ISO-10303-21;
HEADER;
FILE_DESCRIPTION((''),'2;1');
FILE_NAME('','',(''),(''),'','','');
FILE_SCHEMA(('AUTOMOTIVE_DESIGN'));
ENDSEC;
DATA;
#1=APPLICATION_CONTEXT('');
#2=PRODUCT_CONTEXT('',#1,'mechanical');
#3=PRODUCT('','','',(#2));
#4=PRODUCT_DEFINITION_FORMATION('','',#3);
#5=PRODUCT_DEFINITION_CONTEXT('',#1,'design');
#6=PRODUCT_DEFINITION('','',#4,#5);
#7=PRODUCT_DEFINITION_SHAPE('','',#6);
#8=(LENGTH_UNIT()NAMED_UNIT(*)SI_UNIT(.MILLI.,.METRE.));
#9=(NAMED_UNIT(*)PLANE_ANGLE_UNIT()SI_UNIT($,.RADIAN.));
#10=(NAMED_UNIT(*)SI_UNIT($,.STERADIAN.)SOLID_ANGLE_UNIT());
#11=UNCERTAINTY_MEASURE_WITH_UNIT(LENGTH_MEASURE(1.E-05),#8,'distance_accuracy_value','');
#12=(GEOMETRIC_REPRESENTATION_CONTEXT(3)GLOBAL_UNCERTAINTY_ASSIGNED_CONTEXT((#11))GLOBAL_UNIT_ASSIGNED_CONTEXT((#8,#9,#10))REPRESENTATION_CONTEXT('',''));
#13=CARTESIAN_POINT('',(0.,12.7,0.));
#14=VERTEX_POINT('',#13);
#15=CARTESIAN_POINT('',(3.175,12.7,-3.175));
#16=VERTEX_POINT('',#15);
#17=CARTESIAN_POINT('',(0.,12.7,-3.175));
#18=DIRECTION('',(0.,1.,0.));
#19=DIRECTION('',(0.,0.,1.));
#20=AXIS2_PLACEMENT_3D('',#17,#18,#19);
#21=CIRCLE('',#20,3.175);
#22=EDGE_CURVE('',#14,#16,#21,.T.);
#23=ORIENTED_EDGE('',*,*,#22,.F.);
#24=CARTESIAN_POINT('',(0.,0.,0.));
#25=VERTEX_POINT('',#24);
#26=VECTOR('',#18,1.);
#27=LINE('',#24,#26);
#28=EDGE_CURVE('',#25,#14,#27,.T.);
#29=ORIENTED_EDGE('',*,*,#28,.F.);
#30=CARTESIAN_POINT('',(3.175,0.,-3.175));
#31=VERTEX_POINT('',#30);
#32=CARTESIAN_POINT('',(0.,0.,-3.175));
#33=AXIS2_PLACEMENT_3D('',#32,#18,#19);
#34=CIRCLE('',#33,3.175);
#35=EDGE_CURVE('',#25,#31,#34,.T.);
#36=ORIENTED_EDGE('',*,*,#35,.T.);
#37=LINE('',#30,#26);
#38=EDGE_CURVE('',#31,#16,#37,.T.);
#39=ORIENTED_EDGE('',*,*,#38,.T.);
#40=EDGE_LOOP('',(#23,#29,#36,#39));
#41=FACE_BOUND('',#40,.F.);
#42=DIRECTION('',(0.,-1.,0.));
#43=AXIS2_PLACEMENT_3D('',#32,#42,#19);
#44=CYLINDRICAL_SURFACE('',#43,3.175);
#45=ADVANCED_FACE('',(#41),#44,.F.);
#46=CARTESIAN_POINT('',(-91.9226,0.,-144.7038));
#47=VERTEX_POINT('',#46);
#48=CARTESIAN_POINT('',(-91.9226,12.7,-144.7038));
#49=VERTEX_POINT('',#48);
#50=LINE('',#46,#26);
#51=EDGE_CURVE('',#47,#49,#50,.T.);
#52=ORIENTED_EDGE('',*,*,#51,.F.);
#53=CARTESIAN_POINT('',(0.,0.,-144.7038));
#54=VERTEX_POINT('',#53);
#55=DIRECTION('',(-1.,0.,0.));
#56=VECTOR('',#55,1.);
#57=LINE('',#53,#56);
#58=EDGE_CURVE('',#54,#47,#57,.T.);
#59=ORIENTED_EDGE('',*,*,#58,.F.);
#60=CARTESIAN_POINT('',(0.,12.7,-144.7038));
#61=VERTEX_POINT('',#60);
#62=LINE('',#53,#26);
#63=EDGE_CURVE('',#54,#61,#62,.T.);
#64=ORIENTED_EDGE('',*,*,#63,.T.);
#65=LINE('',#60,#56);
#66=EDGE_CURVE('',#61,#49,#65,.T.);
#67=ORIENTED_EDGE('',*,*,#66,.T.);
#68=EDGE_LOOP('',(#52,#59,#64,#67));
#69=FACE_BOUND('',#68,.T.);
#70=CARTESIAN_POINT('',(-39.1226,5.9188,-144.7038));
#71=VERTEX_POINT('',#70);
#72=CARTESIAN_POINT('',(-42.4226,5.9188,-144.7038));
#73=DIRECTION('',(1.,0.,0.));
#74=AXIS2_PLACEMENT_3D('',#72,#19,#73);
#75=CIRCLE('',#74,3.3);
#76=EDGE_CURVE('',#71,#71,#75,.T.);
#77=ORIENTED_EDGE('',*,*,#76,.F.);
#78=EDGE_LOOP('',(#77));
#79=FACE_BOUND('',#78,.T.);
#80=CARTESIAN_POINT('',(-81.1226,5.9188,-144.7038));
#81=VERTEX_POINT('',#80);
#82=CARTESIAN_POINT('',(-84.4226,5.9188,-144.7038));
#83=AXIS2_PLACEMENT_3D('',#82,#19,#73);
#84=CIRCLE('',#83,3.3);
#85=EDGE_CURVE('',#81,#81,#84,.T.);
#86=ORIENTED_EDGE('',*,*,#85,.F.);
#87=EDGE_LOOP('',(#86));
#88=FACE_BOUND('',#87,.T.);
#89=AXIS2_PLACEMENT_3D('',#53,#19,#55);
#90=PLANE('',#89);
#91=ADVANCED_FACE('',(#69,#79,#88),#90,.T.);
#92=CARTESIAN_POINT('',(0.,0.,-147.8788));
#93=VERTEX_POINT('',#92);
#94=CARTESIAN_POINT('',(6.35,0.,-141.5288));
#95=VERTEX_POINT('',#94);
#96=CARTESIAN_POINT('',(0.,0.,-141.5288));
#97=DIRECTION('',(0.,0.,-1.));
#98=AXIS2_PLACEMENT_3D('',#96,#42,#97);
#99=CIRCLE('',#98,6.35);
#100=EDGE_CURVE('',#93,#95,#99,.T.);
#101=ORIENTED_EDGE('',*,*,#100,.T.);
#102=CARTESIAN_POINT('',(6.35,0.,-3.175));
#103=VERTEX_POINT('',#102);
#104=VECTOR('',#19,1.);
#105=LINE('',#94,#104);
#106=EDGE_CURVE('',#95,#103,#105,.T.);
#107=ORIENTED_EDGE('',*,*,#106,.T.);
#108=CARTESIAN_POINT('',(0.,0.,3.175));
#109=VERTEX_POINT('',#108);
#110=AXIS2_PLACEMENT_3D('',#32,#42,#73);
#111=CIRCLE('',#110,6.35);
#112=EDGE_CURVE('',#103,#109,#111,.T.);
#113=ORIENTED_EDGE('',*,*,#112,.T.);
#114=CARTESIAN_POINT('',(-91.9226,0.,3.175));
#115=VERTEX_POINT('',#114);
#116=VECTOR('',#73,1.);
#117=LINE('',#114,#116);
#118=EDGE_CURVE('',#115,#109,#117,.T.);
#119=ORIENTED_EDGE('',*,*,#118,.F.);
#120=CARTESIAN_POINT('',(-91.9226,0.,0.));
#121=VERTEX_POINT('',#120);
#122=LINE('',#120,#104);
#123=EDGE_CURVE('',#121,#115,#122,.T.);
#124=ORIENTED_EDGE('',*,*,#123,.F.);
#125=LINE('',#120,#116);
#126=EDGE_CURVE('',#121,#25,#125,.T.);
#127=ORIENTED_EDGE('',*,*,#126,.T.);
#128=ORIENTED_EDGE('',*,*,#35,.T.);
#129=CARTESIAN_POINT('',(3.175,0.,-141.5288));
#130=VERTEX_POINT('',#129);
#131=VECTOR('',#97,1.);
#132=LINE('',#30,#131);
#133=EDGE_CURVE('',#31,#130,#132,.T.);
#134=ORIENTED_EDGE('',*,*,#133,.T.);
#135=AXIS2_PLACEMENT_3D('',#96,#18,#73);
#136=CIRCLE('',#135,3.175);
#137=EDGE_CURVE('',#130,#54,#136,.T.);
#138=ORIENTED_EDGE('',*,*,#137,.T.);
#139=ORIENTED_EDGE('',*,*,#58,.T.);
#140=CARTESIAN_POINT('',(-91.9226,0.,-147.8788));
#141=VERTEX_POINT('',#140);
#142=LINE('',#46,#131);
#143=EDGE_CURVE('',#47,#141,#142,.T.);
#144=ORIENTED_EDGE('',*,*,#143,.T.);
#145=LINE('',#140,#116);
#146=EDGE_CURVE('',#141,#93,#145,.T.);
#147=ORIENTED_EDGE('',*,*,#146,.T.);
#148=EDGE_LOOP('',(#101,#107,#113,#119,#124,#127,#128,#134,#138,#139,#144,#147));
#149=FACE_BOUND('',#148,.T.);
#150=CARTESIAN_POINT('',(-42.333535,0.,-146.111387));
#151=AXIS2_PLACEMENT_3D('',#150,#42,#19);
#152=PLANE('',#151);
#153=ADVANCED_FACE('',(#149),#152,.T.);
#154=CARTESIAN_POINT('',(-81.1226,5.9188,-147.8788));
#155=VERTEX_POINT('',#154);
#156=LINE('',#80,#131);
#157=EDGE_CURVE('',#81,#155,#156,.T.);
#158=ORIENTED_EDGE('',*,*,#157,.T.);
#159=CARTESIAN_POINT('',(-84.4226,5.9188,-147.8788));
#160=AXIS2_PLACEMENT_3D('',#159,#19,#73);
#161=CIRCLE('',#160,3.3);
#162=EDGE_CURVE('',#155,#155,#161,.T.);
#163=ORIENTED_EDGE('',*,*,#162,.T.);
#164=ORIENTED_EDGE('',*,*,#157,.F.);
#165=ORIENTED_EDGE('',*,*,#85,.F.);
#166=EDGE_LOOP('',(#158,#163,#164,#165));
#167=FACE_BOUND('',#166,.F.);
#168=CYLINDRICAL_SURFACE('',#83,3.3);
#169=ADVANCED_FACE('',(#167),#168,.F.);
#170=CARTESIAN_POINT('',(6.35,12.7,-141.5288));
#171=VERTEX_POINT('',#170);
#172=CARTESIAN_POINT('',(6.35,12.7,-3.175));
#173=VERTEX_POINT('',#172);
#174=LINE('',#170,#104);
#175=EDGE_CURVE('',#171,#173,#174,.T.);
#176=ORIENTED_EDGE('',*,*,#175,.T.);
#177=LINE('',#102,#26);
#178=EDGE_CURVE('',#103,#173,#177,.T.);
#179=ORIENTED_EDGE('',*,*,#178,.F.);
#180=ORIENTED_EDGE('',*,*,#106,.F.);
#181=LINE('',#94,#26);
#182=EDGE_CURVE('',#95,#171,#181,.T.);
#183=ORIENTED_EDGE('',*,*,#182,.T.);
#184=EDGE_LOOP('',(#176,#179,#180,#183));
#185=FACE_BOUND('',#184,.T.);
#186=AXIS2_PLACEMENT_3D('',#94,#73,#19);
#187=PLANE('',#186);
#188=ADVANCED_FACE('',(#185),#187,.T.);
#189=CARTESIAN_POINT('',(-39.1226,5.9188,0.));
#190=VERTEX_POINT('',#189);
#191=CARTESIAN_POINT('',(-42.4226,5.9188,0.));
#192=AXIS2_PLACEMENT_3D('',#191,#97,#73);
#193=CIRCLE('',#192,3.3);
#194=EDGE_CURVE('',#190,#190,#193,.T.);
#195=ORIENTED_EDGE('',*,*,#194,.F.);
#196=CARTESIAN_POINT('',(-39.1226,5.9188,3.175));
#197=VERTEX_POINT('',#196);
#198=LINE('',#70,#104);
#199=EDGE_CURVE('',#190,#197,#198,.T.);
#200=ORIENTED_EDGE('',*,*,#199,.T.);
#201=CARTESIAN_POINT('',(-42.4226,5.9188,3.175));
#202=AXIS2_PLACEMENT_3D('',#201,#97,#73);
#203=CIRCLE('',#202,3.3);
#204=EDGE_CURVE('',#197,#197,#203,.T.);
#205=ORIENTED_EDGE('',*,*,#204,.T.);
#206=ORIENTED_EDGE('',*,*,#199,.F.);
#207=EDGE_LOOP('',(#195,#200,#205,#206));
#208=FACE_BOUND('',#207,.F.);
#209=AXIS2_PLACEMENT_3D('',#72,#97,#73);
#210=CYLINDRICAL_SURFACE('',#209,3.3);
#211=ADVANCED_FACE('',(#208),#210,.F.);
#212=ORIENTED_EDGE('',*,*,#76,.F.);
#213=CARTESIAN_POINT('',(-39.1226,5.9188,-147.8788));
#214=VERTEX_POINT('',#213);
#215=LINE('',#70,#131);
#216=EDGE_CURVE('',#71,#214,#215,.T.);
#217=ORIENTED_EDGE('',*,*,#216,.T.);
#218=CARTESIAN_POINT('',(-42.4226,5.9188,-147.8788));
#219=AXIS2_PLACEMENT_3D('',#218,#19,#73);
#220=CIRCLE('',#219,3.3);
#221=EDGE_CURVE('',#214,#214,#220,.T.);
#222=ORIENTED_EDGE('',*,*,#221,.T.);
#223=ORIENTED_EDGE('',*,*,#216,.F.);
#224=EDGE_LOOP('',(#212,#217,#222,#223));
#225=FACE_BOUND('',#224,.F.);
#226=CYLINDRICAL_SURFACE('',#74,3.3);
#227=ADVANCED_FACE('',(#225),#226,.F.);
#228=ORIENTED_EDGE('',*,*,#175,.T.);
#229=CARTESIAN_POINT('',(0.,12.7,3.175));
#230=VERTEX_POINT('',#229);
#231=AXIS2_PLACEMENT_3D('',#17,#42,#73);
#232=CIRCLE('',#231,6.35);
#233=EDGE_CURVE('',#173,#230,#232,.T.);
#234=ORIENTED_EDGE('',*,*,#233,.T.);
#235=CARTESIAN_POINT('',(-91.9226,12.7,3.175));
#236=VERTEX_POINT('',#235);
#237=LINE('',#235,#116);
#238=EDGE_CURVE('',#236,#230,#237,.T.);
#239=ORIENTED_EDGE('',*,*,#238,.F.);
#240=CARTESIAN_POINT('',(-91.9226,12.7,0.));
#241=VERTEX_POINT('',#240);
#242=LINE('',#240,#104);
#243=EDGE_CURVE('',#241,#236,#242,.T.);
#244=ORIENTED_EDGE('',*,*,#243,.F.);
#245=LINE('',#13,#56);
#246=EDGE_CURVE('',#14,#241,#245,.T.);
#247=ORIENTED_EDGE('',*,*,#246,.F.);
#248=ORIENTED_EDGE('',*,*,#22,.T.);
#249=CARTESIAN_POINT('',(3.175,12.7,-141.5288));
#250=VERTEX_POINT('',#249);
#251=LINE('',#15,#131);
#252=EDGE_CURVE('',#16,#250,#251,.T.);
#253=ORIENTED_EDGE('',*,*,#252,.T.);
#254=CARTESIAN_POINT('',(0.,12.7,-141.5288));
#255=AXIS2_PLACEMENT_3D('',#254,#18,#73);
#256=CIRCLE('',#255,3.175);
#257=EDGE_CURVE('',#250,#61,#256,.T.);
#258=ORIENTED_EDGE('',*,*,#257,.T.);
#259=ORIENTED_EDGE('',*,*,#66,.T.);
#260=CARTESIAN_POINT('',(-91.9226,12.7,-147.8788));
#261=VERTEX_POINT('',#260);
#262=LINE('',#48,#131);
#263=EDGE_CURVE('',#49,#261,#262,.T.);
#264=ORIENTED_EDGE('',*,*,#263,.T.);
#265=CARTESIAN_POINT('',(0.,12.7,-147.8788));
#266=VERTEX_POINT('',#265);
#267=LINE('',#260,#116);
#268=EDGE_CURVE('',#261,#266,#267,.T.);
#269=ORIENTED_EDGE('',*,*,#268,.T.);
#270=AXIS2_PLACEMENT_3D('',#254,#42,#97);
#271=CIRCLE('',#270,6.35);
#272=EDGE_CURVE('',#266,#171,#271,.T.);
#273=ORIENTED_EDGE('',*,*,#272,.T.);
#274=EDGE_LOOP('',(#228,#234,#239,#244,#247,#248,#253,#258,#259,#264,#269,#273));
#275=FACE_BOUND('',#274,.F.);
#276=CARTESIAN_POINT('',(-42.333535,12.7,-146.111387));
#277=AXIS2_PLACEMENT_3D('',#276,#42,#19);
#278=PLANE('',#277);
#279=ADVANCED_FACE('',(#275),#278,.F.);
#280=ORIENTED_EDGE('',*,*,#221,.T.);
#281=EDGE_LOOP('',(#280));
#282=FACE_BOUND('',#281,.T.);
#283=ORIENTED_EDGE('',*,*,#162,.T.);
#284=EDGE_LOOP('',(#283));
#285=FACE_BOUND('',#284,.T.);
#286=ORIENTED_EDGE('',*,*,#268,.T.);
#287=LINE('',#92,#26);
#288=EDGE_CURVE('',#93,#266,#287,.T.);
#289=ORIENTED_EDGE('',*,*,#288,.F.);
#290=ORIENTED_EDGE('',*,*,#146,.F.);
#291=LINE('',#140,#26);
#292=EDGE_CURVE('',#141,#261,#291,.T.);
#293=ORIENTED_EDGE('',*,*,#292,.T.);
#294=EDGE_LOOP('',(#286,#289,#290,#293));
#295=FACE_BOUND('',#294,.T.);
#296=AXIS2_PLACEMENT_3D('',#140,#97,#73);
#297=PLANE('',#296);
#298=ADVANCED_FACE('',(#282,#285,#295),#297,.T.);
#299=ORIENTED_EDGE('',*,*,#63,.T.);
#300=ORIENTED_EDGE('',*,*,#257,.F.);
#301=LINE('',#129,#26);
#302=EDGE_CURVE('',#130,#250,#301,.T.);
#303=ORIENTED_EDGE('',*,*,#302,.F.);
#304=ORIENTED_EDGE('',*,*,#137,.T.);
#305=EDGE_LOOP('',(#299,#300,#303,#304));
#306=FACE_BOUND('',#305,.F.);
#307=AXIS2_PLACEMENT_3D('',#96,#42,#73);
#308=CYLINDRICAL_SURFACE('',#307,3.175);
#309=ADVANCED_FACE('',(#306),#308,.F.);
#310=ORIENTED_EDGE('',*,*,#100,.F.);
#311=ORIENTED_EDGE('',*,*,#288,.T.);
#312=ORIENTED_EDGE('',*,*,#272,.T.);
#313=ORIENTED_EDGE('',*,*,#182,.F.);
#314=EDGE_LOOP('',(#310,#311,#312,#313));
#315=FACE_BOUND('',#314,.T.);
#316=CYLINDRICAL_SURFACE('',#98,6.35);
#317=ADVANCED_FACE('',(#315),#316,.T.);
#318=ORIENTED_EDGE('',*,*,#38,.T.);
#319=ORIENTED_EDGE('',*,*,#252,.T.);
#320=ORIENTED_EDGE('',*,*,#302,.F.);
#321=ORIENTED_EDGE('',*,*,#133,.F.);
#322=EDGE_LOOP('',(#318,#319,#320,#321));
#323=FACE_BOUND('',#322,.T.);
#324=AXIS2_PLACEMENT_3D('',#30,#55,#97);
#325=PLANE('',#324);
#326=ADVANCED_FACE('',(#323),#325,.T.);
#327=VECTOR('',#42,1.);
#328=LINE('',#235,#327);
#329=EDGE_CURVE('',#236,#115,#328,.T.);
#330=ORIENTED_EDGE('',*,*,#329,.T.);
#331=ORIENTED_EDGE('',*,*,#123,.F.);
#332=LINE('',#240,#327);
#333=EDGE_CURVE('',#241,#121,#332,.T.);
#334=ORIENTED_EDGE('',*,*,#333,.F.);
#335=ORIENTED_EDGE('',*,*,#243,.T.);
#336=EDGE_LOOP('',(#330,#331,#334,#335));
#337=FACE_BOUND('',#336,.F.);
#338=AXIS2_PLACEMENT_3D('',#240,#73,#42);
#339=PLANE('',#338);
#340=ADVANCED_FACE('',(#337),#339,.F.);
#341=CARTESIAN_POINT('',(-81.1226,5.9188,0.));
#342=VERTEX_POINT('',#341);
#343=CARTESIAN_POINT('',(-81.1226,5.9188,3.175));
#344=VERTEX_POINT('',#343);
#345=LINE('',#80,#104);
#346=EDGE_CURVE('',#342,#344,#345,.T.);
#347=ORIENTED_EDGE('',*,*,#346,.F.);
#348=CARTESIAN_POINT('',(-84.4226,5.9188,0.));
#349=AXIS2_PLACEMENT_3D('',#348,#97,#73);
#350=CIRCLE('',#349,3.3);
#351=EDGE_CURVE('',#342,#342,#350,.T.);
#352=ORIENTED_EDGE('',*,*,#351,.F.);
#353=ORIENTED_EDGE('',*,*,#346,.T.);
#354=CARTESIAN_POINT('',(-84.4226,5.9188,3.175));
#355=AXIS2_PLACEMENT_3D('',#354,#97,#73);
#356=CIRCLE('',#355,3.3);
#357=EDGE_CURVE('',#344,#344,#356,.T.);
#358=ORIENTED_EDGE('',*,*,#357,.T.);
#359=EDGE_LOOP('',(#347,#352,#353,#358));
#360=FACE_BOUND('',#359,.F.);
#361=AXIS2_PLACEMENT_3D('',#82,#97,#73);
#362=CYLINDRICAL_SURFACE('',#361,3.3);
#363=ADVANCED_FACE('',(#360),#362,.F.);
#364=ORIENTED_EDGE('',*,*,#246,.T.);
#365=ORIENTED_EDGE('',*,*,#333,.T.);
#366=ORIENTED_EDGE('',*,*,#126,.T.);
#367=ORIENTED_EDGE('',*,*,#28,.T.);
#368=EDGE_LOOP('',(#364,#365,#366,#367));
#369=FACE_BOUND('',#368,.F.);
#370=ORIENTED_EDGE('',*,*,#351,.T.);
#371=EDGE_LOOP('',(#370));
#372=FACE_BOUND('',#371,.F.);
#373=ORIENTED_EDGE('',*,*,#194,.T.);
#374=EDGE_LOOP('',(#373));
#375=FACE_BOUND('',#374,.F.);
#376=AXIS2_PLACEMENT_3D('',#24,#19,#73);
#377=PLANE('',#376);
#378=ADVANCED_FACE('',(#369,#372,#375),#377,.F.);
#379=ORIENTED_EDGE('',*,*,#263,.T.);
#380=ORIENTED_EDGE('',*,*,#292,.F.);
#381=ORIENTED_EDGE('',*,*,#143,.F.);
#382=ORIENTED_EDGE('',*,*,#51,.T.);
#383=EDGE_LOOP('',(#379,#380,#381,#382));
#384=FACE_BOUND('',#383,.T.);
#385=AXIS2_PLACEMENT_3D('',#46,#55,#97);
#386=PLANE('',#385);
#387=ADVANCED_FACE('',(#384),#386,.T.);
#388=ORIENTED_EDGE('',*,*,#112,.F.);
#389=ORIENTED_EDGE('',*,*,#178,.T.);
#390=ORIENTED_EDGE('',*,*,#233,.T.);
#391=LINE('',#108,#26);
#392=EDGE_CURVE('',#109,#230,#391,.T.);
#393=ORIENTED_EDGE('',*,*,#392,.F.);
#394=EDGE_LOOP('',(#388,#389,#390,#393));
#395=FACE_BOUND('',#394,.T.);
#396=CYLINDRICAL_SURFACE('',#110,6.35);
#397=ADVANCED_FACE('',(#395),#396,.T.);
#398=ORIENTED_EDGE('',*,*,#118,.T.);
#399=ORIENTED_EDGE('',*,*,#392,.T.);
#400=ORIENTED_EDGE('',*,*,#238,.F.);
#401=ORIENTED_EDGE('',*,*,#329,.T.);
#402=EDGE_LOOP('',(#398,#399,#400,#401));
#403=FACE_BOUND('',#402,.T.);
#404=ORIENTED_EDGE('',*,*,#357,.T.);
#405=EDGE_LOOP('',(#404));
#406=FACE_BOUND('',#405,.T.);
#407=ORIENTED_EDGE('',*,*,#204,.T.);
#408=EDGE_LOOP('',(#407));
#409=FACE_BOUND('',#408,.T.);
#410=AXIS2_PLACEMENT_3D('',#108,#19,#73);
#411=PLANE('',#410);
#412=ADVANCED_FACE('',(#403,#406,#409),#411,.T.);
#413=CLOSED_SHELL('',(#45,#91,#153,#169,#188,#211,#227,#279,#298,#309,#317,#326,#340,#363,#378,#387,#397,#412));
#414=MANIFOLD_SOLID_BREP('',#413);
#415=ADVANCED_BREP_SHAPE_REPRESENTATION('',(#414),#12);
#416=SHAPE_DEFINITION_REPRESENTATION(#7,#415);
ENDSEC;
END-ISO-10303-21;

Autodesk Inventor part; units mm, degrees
ref_plane "YZ Plane" through (0, 0, 0) normal (1, 0, 0) x (0, 1, 0)
ref_plane "XZ Plane" through (0, 0, 0) normal (0, 1, 0) x (-1, 0, 0)
ref_plane "XY Plane" through (0, 0, 0) normal (0, 0, 1) x (1, 0, 0)
sketch "Sketch1" plane through (0, 0, 0) normal (0, 0, 1) x (1, 0, 0)
  line L0 (0, 0) -> (336.562362, 0)
  line L1 (336.562362, -12.7) -> (0, -12.7)
  line L2 (0, 0) -> (95.513688, 0)
  line L3 (95.513688, 0) -> (95.513688, -1.5875)
  line L4 (95.513688, -1.5875) -> (94.719938, -1.5875)
  line L5 (94.719938, -1.5875) -> (94.719938, 0)
  line L6 (95.513688, -1.5875) -> (96.307438, -1.5875)
  line L7 (96.307438, -1.5875) -> (96.307438, 0)
  line L8 (95.513688, -12.7) -> (95.513688, -11.1125)
  line L9 (95.513688, -11.1125) -> (94.719938, -11.1125)
  line L10 (94.719938, -11.1125) -> (94.719938, -12.7)
  line L11 (95.513688, -11.1125) -> (96.307438, -11.1125)
  line L12 (96.307438, -11.1125) -> (96.307438, -12.7)
  line L13 (336.562362, 0) -> (241.058362, 0)
  line L14 (241.058362, 0) -> (241.058362, -1.5875)
  line L15 (241.058362, -1.5875) -> (241.852112, -1.5875)
  line L16 (241.852112, -1.5875) -> (241.852112, 0)
  line L17 (241.058362, -1.5875) -> (240.264612, -1.5875)
  line L18 (240.264612, -1.5875) -> (240.264612, 0)
  line L19 (241.058362, -12.7) -> (241.058362, -11.1125)
  line L20 (241.058362, -11.1125) -> (241.852112, -11.1125)
  line L21 (241.852112, -11.1125) -> (241.852112, -12.7)
  line L22 (241.058362, -11.1125) -> (240.264612, -11.1125)
  line L23 (240.264612, -11.1125) -> (240.264612, -12.7)
  dimension "d1" = 91.9226
sketch "Sketch1 outline for Plate5" plane through (0, 0, 0) normal (0, 0, 1) x (1, 0, 0)
  line L0 (-91.9226, 0) -> (0, 0)
  line L1 (-91.9226, 12.7) -> (-91.9226, 0)
  line L2 (-84.4296, 12.7) -> (-91.9226, 12.7)
  line L3 (-42.418, 12.7) -> (-84.4296, 12.7)
  line L4 (0, 12.7) -> (-42.418, 12.7)
  line L5 (0, 0) -> (0, 12.7)
extrude "Plate5" add sketch "Sketch1 outline for Plate5" along normal blind 3.175
sketch "Sketch6" plane through (3.175, 0, -3.175) normal (1, 0, 0) x (0, 1, 0)
  line L0 (12.7, 0) -> (0, 0)
  line L1 (0, 0) -> (0, -138.3538)
  line L2 (0, -138.3538) -> (12.7, -138.3538)
  line L3 (12.7, -138.3538) -> (12.7, 0)
edge flange "Flange4" height 144.7038 angle 90 thickness 3.175 bend radius 3.175 thickness toward (1, 0, 0) relief tear relief width 3.175 relief depth 1.5875 edges at (0, 6.35, 0) wall of the first edge with corners at (3.175, 12.7, -3.175) (3.175, 0, -3.175) (3.175, 0, -141.5288) (3.175, 12.7, -141.5288)
bend "Bend4"
corner "Corner4"
sketch "Sketch7" plane through (0, 0, -144.7038) normal (0, 0, -1) x (-1, 0, 0)
  line L0 (0, 12.7) -> (0, 0)
  line L1 (0, 0) -> (91.9226, 0)
  line L2 (91.9226, 0) -> (91.9226, 12.7)
  line L3 (91.9226, 12.7) -> (0, 12.7)
edge flange "Flange5" height 98.2726 angle 90 thickness 3.175 bend radius 3.175 thickness toward (0, 0, -1) relief tear relief width 3.175 relief depth 1.5875 edges at (3.175, 6.35, -141.5288) wall of the first edge with corners at (0, 12.7, -144.7038) (0, 0, -144.7038) (-91.9226, 0, -144.7038) (-91.9226, 12.7, -144.7038)
bend "Bend5"
corner "Corner5"
sketch "Sketch9" plane through (0, 0, 3.175) normal (0, 0, 1) x (1, 0, 0)
  circle A0 centre (-42.4226, 501.2188) radius 3.3 projected
  circle A1 centre (-84.4226, 501.2188) radius 3.3 projected
extrude "Extrusion3" cut sketch "Sketch9" against normal blind 25374.6
sketch "Sketch10" plane through (-91.9226, 0, -144.7038) normal (0, 0, 1) x (1, 0, 0)
  line L0 (45, 276.1188) -> (45, -384.2812)
  circle A0 centre (7.5, 5.9188) radius 3.3
  circle A1 centre (49.5, 5.9188) radius 3.3
extrude "Extrusion4" cut sketch "Sketch10" along normal mid plane 25374.6
sketch "Sketch2" plane through (336.562362, -12.7, 0) normal (0, 0, 1) x (1, 0, 0)
  line L0 (-95.504, 12.7) -> (0, 12.7)
  line L1 (-95.504, 12.7) -> (-95.504, 11.1125)
  line L2 (-241.048674, 11.1125) -> (-241.048674, 12.7)
  line L3 (-336.562362, 12.7) -> (-241.048674, 12.7)
  line L4 (-241.048674, 12.7) -> (-241.842424, 12.7)
  line L5 (-241.842424, 12.7) -> (-241.842424, 11.1125)
  line L6 (-241.842424, 11.1125) -> (-241.048674, 11.1125)
  line L7 (-95.504, 12.7) -> (-94.71025, 12.7)
  line L8 (-95.504, 11.1125) -> (-94.71025, 11.1125)
  line L9 (-94.71025, 11.1125) -> (-94.71025, 12.7)
  dimension "d14" = 0.79375
  dimension "d15" = 0.79375
equation "\"d43\" = BendReliefWidth"
equation "\"d44\" = BendReliefDepth"
equation "\"d45\" = MinimumRemnant"
equation "\"d46\" = BendRadius"
equation "\"d49\" = BendRadius"
equation "\"d50\" = CornerReliefSize"
equation "\"d51\" = GapSize"
equation "\"d52\" = JacobiRadiusSize"
equation "\"d53\" = BendReliefWidth"
equation "\"d54\" = BendReliefDepth"
equation "\"d55\" = MinimumRemnant"
equation "\"d56\" = BendRadius"
equation "\"d59\" = BendRadius"
equation "\"d60\" = CornerReliefSize"
equation "\"d61\" = GapSize"
equation "\"d62\" = JacobiRadiusSize"
equation "\"BendRadius\" = Thickness"
equation "\"BendReliefWidth\" = Thickness"
equation "\"BendReliefDepth\" = 0.5 * Thickness"
equation "\"CornerReliefSize\" = 4 * Thickness"
equation "\"MinimumRemnant\" = 2 * Thickness"
equation "\"TransitionRadius\" = BendRadius"
equation "\"JacobiRadiusSize\" = BendRadius"
equation "\"GapSize\" = Thickness"
equation "\"d8\" = BendRadius"
equation "\"d42\" = BendRadius"
equation "\"Thickness\" = 3.175"
properties part number "tie-together tier 1" material "Aluminum 6061"
